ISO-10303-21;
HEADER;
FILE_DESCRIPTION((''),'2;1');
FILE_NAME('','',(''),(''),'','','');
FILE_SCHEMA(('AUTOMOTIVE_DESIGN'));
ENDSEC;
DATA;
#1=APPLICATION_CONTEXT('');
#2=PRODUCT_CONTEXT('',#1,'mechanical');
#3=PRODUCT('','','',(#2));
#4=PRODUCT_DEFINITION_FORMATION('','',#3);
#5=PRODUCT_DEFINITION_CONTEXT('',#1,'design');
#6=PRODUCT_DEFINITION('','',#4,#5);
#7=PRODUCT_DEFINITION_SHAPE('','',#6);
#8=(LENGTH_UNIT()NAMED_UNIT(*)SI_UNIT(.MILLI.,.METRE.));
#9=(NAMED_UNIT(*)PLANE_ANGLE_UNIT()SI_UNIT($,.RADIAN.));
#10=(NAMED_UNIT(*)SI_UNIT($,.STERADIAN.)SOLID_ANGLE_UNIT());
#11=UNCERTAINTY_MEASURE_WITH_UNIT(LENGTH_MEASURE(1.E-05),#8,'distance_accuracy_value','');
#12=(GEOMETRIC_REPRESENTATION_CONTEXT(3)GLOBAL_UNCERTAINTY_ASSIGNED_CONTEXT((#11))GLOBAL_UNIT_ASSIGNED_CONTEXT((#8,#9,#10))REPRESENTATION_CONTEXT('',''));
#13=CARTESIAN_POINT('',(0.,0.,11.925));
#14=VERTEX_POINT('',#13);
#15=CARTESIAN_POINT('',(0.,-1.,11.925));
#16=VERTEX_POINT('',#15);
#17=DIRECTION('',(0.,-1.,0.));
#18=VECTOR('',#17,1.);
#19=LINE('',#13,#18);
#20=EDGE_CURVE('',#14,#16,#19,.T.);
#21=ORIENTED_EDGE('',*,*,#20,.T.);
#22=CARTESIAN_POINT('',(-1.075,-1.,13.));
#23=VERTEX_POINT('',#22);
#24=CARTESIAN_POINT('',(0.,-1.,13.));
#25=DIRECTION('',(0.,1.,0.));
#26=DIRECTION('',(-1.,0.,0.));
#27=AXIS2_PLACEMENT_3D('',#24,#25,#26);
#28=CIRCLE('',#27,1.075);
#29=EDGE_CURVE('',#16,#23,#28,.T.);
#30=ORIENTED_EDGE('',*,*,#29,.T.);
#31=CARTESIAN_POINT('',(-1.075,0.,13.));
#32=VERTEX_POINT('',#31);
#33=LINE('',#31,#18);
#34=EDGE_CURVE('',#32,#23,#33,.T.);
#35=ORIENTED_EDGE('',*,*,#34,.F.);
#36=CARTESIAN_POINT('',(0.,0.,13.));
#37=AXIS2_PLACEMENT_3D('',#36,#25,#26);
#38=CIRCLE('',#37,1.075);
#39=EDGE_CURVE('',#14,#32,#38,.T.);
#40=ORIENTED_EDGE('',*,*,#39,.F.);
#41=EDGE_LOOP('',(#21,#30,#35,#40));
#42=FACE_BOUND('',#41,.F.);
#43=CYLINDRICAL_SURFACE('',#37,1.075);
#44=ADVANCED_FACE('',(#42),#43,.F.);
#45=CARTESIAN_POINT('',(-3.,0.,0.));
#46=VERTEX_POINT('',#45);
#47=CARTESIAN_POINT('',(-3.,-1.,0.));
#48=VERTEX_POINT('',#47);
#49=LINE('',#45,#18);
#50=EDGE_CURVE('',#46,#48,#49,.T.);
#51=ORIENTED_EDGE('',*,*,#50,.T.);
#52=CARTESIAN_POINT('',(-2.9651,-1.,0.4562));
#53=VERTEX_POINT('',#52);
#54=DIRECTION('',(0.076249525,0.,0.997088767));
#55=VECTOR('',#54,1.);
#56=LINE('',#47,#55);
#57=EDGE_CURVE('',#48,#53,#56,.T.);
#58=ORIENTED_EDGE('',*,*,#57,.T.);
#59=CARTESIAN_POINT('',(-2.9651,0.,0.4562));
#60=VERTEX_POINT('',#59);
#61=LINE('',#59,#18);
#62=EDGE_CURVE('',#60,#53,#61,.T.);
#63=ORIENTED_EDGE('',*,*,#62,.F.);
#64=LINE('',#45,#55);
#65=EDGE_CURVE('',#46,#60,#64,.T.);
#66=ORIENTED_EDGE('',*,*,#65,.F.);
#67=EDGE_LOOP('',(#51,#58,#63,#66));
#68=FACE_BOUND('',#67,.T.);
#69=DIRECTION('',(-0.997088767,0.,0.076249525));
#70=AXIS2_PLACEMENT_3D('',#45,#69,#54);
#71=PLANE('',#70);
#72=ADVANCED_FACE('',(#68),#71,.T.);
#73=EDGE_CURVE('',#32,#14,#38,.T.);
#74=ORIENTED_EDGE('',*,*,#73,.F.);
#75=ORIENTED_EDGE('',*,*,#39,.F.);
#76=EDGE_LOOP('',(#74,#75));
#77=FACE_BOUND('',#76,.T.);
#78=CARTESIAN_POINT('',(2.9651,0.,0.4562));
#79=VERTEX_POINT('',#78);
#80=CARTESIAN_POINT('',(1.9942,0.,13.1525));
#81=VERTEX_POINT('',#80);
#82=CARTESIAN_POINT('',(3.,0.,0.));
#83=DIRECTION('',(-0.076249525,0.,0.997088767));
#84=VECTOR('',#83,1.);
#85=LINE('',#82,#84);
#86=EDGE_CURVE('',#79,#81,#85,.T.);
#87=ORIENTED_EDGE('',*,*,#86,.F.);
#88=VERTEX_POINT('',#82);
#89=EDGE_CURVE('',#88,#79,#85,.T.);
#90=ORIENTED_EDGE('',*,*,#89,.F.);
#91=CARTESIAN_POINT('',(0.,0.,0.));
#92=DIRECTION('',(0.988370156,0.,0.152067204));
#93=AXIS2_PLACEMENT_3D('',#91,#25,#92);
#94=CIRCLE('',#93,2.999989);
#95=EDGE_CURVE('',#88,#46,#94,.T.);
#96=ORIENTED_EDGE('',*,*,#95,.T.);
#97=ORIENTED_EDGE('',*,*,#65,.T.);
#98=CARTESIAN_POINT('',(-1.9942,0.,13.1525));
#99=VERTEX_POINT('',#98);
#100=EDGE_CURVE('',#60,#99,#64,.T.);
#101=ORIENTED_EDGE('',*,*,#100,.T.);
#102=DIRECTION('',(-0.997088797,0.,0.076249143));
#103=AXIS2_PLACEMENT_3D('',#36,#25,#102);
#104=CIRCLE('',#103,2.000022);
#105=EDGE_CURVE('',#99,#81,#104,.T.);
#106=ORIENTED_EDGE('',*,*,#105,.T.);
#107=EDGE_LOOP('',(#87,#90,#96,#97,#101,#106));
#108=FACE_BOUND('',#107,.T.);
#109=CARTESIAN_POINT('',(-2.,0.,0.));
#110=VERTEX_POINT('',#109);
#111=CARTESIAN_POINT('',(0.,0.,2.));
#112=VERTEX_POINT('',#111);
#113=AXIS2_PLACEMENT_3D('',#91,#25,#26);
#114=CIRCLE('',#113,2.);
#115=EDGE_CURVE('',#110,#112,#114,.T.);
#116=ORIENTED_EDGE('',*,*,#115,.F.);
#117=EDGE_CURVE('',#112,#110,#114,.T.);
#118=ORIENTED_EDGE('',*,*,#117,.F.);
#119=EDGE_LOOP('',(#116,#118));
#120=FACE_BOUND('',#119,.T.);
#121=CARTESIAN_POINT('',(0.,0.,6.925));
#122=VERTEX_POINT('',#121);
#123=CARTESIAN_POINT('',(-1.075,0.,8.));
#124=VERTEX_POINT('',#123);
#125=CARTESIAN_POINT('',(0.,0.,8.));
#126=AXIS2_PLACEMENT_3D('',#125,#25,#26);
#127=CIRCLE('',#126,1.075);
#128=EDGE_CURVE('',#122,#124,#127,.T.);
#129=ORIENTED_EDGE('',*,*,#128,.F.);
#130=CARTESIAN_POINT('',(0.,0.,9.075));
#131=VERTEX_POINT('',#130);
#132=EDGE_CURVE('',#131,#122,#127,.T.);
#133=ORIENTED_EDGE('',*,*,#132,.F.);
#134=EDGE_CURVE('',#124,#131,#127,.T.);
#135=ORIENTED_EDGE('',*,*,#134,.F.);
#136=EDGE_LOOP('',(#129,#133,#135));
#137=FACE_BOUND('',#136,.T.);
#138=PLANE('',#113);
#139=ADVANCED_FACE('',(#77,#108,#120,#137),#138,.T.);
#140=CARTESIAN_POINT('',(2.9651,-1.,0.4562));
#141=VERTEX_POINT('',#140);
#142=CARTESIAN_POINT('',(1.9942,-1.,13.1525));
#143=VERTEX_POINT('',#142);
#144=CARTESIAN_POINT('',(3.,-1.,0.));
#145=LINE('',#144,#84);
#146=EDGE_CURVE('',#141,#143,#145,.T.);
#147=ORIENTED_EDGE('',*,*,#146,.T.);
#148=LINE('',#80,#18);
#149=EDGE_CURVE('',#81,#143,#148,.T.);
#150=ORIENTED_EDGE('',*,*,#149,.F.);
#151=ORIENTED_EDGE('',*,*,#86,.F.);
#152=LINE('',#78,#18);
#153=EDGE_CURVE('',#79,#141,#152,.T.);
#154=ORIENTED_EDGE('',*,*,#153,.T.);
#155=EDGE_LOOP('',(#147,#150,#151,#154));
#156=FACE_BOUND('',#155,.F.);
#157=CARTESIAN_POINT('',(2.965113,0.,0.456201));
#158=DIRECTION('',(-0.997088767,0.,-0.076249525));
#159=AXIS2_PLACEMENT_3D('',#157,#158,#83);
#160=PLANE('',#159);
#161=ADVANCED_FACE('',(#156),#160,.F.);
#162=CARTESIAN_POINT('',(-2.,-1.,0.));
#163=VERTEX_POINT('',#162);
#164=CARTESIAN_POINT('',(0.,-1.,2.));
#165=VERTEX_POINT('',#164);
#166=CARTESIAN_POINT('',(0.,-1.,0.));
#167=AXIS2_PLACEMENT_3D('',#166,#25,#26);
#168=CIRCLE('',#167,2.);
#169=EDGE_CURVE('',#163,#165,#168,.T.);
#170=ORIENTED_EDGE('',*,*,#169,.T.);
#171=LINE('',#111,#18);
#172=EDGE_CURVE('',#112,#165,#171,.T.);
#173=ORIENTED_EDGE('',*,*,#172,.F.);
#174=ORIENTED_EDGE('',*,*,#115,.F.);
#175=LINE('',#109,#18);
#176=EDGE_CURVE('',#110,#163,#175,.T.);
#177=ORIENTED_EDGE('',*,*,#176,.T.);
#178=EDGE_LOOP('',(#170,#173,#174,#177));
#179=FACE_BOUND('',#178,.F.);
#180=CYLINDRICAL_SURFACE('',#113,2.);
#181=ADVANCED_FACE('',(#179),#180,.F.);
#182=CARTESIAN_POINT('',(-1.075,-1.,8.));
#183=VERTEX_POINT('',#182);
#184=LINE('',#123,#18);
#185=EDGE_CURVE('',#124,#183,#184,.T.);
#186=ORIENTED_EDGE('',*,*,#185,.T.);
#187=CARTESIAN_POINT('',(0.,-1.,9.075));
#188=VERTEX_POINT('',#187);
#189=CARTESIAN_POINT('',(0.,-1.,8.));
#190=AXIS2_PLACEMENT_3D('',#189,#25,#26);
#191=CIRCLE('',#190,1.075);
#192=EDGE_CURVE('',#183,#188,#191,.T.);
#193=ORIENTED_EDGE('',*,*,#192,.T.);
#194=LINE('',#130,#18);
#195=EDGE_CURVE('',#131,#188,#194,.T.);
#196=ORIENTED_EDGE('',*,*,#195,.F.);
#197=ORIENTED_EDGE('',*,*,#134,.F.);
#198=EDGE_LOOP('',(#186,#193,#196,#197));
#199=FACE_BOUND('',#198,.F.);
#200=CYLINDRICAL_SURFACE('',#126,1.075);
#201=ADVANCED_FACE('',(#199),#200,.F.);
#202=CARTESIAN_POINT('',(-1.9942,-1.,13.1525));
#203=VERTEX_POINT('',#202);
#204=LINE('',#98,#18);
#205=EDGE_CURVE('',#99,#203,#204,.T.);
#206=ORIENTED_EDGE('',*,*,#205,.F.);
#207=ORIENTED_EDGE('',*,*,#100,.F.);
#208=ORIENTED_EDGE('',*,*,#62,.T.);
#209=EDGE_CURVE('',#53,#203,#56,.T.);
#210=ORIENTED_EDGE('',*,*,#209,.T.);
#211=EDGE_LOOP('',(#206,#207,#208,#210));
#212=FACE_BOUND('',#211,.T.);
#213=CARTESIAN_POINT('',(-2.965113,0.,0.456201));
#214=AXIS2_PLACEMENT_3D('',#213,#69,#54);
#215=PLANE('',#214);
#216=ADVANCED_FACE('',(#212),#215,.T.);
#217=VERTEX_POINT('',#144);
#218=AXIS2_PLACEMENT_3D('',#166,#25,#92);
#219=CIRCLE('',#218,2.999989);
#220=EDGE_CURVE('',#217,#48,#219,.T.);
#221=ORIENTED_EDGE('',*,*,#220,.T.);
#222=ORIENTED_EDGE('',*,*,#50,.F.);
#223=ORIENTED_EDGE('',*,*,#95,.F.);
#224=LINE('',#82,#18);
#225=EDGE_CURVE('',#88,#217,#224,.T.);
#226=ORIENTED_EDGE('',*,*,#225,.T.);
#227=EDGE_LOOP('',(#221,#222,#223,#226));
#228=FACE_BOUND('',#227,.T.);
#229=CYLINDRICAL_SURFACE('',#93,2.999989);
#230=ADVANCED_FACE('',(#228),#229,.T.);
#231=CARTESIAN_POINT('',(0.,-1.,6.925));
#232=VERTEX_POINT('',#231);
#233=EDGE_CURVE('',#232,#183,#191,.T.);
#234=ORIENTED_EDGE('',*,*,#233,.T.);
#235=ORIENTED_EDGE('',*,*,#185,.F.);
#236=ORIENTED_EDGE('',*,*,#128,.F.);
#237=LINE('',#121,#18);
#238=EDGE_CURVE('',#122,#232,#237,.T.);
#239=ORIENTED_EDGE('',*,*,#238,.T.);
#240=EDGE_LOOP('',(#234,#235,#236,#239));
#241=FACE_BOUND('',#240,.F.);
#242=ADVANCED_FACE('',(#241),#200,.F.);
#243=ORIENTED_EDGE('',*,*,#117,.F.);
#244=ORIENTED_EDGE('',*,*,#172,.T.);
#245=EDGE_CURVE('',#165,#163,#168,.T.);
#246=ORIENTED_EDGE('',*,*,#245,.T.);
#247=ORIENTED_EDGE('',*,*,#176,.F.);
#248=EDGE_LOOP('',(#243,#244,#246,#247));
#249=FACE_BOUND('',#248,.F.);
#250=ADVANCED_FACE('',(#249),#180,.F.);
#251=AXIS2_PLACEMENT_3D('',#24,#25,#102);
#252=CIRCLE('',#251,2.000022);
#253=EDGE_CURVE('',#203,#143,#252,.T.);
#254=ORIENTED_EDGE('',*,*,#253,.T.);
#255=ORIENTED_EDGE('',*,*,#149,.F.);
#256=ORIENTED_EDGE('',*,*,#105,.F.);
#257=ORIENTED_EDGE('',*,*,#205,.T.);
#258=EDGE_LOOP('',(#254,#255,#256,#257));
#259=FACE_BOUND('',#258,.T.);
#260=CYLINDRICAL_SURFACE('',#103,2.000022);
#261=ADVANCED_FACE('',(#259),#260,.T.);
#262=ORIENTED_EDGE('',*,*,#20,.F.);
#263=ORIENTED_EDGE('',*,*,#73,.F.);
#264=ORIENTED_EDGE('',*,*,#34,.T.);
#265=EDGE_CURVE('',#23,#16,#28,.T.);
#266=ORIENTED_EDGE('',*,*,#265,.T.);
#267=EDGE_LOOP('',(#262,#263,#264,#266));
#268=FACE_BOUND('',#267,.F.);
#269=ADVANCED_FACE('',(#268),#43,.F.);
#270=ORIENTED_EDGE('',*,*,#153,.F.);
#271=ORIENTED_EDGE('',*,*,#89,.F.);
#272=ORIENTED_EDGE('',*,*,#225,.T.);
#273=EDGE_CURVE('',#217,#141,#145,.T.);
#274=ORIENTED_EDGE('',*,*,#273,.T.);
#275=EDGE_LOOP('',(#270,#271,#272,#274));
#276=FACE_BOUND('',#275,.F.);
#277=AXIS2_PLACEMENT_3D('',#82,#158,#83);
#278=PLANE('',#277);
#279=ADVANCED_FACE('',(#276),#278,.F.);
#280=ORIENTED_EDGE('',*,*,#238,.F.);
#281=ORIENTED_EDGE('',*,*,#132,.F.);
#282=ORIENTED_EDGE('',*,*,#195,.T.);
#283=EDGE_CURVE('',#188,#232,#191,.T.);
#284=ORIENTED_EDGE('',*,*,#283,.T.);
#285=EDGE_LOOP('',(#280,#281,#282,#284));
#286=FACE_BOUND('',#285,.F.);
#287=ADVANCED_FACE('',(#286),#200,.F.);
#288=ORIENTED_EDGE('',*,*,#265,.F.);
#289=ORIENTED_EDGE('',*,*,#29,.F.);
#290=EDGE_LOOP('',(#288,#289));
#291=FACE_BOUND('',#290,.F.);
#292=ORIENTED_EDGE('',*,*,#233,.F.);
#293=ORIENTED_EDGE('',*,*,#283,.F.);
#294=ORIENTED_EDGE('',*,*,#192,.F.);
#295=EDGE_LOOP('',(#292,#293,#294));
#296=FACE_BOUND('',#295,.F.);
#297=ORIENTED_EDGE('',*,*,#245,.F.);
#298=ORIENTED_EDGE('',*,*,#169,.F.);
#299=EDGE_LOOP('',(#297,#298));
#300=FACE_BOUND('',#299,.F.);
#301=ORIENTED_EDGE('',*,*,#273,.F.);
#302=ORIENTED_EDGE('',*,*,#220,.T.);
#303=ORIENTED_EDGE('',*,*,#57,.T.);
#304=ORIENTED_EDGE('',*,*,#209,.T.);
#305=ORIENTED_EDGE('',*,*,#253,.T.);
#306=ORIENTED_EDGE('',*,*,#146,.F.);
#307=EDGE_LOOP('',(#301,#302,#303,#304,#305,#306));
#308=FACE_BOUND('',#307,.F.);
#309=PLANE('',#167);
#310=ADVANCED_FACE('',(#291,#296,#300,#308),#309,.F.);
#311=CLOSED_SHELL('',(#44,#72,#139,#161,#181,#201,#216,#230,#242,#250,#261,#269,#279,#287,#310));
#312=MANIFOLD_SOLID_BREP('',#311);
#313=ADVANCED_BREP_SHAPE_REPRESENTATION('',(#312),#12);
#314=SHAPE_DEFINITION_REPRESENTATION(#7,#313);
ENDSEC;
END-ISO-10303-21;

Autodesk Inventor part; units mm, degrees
ref_plane "YZ Plane" through (0, 0, 0) normal (1, 0, 0) x (0, 1, 0)
ref_plane "XZ Plane" through (0, 0, 0) normal (0, 1, 0) x (-1, 0, 0)
ref_plane "XY Plane" through (0, 0, 0) normal (0, 0, 1) x (1, 0, 0)
sketch "Sketch1" plane through (0, 0, 0) normal (0, 1, 0) x (-1, 0, 0)
  arc A0 (-2.9651, 0.4562) -> (2.9651, 0.4562) centre (0, 0) ccw
  line L0 (0, 0) -> (0, 8)
  circle A1 centre (0, 8) radius 1.075
  line L1 (0, 8) -> (0, 13)
  circle A2 centre (0, 13) radius 1.075
  arc A3 (1.9942, 13.1525) -> (-1.9942, 13.1525) centre (0, 13) ccw
  line L2 (3, 0) -> (1.9942, 13.1525)
  line L3 (-3, 0) -> (-1.9942, 13.1525)
  circle A4 centre (0, 0) radius 2
  dimension "d0" = 6
  dimension "d1" = 8
  dimension "d2" = 2.15
  dimension "d3" = 5
  dimension "d4" = 2.15
  dimension "d5" = 4
  dimension "d6" = 4
extrude "Extrusion1" add sketch "Sketch1" against normal blind 1 contours L3 A3 L2 A0
properties part number "servoya giden parca"
